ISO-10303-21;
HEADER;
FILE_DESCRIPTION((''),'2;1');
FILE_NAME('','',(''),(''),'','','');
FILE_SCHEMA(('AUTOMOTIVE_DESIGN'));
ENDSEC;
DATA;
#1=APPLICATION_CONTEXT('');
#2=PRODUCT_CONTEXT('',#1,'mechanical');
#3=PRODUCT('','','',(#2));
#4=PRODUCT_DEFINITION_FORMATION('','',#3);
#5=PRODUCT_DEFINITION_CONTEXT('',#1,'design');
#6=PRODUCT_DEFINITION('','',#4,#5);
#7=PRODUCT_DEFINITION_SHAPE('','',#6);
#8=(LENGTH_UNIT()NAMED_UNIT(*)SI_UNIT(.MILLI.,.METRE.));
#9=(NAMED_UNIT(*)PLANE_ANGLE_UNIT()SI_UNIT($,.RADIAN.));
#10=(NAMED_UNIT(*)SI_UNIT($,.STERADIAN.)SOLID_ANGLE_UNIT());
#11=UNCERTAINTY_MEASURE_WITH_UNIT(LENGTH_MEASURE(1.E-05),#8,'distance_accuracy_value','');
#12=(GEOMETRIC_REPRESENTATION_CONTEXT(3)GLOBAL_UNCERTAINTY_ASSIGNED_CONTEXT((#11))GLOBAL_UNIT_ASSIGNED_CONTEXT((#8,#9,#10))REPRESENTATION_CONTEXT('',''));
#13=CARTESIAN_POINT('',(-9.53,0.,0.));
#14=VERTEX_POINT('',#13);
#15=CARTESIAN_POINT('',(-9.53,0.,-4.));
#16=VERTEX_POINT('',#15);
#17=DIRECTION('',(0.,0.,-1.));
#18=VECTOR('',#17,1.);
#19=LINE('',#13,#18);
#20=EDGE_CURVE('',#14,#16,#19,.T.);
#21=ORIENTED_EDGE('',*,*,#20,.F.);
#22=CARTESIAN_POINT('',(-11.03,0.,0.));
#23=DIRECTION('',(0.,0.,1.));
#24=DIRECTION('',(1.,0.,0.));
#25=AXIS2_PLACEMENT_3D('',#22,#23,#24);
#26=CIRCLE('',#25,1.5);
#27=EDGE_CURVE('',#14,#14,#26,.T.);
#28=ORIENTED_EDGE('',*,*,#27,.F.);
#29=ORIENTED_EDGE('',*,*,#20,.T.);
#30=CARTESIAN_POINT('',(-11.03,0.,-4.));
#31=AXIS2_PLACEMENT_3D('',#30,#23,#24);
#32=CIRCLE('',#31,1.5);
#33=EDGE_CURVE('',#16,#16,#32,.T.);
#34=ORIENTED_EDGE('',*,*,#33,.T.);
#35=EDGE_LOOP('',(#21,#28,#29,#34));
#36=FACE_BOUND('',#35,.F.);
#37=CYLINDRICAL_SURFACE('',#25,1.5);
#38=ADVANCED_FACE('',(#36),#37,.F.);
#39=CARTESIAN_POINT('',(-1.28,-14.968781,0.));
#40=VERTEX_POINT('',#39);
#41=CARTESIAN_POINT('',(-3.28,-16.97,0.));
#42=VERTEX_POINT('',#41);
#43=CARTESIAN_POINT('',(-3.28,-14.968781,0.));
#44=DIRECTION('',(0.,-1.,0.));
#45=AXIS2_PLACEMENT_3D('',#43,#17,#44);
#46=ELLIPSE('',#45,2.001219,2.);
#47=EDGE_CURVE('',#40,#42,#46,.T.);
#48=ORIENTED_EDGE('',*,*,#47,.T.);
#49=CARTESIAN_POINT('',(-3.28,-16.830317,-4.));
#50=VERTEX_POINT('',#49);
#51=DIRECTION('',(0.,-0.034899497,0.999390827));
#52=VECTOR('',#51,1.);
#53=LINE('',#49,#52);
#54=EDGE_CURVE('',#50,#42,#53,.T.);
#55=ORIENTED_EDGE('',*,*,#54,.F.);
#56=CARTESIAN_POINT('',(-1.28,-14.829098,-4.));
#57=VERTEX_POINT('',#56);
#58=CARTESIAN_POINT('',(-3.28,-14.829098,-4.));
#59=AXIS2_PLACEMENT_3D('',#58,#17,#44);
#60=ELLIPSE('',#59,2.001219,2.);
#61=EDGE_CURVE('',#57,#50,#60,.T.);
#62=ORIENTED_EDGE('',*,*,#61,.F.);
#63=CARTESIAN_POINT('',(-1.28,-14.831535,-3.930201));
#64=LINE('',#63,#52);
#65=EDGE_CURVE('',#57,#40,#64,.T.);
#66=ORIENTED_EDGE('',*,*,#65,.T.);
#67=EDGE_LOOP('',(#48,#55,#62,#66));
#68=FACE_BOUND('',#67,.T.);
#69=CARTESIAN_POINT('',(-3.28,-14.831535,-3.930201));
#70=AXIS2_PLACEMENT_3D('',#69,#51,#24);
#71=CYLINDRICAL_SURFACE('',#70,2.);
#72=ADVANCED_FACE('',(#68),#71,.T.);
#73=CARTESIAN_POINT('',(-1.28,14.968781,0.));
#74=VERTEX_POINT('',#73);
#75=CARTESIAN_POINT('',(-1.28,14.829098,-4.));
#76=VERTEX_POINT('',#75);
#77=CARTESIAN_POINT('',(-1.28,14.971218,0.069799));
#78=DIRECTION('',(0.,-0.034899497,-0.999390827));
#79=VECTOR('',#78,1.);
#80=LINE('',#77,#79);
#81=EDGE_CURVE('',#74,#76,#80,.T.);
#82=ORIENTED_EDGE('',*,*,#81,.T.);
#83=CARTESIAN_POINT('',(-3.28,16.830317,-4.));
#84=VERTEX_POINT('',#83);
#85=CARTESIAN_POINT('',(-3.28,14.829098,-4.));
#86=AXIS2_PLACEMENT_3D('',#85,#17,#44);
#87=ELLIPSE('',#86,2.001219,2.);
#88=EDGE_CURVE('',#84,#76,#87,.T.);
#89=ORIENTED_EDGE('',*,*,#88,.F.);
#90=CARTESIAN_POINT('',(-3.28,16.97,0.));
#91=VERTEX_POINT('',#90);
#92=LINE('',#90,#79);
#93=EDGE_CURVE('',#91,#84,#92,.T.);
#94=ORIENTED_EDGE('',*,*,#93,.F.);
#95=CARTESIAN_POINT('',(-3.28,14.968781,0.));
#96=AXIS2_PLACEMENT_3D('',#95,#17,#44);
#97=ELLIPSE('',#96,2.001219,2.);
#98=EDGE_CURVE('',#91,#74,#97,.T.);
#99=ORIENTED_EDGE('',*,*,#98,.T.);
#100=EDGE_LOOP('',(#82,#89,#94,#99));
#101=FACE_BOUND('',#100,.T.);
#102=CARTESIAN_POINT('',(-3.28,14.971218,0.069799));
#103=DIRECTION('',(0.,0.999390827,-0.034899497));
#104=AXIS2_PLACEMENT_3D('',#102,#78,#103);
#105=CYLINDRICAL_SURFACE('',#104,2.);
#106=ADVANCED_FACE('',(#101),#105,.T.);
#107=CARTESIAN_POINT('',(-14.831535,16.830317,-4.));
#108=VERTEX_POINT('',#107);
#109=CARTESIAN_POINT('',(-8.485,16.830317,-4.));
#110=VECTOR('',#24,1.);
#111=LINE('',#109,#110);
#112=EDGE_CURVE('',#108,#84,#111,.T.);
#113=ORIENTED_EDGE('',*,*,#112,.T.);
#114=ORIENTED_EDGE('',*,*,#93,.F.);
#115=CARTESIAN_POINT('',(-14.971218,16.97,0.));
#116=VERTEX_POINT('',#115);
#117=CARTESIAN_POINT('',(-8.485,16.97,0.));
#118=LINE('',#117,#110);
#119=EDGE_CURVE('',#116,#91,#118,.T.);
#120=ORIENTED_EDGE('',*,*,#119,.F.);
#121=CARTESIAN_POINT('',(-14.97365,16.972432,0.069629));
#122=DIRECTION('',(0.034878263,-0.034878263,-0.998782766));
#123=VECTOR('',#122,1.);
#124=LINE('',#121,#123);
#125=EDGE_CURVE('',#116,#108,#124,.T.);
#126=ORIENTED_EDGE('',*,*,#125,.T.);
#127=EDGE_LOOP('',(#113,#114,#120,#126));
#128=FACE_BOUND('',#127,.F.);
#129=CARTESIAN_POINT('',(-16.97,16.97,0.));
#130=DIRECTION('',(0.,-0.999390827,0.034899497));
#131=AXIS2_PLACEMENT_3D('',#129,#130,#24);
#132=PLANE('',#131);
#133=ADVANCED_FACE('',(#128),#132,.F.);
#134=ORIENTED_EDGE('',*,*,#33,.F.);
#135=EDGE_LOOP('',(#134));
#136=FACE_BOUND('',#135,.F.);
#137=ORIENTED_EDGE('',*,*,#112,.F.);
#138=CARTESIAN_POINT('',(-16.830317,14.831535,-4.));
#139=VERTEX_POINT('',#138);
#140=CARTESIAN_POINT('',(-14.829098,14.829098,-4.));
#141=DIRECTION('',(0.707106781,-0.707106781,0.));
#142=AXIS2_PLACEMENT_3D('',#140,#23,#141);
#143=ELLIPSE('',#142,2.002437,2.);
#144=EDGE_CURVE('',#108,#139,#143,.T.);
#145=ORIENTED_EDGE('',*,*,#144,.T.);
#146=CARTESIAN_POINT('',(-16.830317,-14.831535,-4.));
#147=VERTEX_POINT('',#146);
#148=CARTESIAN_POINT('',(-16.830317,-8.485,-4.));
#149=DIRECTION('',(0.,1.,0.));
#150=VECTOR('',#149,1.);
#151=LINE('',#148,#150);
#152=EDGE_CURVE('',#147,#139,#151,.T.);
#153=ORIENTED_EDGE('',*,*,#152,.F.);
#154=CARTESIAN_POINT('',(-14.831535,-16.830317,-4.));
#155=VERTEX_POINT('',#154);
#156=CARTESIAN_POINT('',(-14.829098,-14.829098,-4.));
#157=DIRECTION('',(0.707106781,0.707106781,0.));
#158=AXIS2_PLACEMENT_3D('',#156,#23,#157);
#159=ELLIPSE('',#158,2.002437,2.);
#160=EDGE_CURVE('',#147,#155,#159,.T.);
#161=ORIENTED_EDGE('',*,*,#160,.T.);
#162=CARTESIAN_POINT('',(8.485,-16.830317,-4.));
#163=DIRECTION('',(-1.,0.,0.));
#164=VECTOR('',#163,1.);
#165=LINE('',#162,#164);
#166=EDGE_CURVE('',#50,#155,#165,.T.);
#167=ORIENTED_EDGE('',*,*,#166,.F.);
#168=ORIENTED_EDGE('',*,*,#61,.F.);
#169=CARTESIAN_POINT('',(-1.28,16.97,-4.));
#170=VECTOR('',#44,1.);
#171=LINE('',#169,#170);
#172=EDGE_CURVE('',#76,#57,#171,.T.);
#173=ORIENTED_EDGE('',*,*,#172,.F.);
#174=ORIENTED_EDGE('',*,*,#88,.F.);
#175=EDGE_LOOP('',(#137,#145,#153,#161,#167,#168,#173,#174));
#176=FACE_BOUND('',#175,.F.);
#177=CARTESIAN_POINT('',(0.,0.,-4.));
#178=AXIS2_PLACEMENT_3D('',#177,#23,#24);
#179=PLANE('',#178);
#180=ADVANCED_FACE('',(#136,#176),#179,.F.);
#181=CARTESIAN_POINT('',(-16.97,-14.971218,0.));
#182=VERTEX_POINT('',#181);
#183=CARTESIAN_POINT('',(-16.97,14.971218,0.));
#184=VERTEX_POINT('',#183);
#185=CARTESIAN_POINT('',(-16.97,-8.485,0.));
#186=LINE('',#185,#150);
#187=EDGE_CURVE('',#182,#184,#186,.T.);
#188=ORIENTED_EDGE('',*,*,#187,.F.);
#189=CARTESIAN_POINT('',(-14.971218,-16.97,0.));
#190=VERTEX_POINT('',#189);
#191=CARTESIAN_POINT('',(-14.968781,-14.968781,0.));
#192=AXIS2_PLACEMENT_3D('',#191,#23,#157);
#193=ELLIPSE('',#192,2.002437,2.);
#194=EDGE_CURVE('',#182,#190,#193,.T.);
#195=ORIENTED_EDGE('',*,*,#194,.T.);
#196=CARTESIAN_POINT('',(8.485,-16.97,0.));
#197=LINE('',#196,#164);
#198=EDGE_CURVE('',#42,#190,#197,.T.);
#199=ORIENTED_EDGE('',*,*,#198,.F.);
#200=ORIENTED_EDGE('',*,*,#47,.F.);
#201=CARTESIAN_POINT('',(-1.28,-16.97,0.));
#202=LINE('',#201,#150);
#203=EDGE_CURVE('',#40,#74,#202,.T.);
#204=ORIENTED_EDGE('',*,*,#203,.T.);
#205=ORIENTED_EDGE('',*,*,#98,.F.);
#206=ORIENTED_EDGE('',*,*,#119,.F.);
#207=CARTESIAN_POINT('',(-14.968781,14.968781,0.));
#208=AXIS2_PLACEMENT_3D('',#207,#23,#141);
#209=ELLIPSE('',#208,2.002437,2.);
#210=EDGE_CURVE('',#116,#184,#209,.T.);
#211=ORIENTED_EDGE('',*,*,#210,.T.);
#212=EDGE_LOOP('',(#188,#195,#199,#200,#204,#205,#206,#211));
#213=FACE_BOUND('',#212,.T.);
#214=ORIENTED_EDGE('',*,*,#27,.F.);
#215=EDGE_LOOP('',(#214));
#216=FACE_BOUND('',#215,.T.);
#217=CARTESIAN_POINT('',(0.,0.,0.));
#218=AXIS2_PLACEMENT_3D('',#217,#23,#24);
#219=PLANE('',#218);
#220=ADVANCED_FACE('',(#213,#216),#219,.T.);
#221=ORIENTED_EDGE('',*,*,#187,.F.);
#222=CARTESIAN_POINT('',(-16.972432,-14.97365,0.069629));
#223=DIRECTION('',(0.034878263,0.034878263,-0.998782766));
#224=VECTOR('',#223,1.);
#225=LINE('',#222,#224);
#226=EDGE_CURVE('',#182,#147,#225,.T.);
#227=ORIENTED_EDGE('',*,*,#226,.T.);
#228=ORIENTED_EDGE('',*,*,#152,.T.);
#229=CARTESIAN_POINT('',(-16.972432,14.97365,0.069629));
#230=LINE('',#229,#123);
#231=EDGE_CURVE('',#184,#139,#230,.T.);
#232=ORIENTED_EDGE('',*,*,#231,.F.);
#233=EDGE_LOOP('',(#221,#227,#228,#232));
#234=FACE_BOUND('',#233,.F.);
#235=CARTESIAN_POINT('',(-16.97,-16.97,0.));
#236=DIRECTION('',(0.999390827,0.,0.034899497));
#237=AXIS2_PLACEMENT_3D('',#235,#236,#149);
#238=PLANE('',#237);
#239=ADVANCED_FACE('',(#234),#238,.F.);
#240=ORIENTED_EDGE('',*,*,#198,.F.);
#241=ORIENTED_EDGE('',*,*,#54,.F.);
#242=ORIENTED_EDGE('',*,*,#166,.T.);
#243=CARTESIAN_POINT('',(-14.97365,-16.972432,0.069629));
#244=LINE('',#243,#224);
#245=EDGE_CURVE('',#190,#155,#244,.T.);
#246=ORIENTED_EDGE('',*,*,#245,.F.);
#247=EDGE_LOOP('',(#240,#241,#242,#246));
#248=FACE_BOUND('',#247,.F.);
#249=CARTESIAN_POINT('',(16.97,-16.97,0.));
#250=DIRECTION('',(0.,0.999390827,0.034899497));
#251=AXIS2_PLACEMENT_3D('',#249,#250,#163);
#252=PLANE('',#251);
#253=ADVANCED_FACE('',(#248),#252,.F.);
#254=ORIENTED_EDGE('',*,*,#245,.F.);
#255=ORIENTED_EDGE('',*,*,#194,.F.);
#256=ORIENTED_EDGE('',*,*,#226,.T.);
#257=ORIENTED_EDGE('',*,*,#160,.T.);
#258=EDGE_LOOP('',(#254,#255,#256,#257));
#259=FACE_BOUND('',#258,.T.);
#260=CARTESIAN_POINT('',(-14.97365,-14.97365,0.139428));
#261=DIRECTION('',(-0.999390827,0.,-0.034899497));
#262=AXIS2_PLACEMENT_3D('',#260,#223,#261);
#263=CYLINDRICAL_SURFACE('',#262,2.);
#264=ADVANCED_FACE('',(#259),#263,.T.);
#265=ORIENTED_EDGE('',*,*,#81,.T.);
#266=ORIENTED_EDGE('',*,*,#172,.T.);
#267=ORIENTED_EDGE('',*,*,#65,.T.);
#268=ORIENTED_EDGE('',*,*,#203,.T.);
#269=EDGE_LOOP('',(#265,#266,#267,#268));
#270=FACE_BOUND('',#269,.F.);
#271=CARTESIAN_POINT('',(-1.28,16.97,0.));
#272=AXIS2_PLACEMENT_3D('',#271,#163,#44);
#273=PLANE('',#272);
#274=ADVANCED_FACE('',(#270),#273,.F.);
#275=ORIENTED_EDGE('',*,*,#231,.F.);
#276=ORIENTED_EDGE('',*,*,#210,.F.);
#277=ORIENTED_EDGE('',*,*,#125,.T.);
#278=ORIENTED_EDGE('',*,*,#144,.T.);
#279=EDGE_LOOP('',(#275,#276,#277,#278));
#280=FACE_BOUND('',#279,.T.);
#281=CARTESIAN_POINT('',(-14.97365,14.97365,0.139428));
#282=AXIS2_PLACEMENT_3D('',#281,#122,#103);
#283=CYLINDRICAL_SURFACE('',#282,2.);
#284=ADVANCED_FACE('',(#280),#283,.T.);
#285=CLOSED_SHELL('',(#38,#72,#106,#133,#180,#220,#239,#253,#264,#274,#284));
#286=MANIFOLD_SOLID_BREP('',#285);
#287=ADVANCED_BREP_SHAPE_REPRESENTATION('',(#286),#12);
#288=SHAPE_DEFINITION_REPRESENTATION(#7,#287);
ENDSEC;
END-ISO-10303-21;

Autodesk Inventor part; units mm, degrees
ref_plane "YZ Plane" through (0, 0, 0) normal (1, 0, 0) x (0, 1, 0)
ref_plane "XZ Plane" through (0, 0, 0) normal (0, 1, 0) x (-1, 0, 0)
ref_plane "XY Plane" through (0, 0, 0) normal (0, 0, 1) x (1, 0, 0)
ref_plane "Arbeitsebene1" through (0, 0, 0) normal (0, 0, 1) x (1, 0, 0)
sketch "Skizze1" plane through (0, 0, 0) normal (0, 0, 1) x (1, 0, 0)
  line L0 (20.3781, -18.1328) -> (23.4454, -18.9546) construction
  line L1 (23.4454, -18.9546) -> (24.2672, -22.0219) construction
  line L2 (24.2672, -22.0219) -> (22.0219, -24.2672) construction
  line L3 (22.0219, -24.2672) -> (18.9546, -23.4454) construction
  line L4 (18.9546, -23.4454) -> (18.1328, -20.3781) construction
  line L5 (18.1328, -20.3781) -> (20.3781, -18.1328) construction
  line L6 (-24.2672, 22.0219) -> (-22.0219, 24.2672) construction
  line L7 (-22.0219, 24.2672) -> (-18.9546, 23.4454) construction
  line L8 (-18.9546, 23.4454) -> (-18.1328, 20.3781) construction
  line L9 (-18.1328, 20.3781) -> (-20.3781, 18.1328) construction
  line L10 (-20.3781, 18.1328) -> (-23.4454, 18.9546) construction
  line L11 (-23.4454, 18.9546) -> (-24.2672, 22.0219) construction
  circle A0 centre (20.66, 14.3) radius 2.475 construction
  circle A1 centre (14.3, -20.66) radius 2.475 construction
  circle A2 centre (-20.66, -14.3) radius 2.475 construction
  circle A3 centre (-14.3, 20.66) radius 2.475 construction
  circle A4 centre (14.3, 20.66) radius 2.475 construction
  circle A5 centre (-20.66, 14.3) radius 2.475 construction
  circle A6 centre (-14.3, -20.66) radius 2.475 construction
  circle A7 centre (20.66, -14.3) radius 2.475 construction
  arc A8 (-8.8, -18.96) -> (-8.8, -22.36) centre (-8.8, -20.66) ccw construction
  line L12 (-8.8, -18.96) -> (8.8, -18.96) construction
  arc A9 (8.8, -22.36) -> (8.8, -18.96) centre (8.8, -20.66) ccw construction
  line L13 (8.8, -22.36) -> (-8.8, -22.36) construction
  arc A10 (-8.8, 22.36) -> (-8.8, 18.96) centre (-8.8, 20.66) ccw construction
  line L14 (-8.8, 22.36) -> (8.8, 22.36) construction
  arc A11 (8.8, 18.96) -> (8.8, 22.36) centre (8.8, 20.66) ccw construction
  line L15 (8.8, 18.96) -> (-8.8, 18.96) construction
  arc A12 (-18.96, 8.8) -> (-22.36, 8.8) centre (-20.66, 8.8) ccw construction
  line L16 (-18.96, 8.8) -> (-18.96, -8.8) construction
  arc A13 (-22.36, -8.8) -> (-18.96, -8.8) centre (-20.66, -8.8) ccw construction
  line L17 (-22.36, -8.8) -> (-22.36, 8.8) construction
  arc A14 (18.96, -8.8) -> (22.36, -8.8) centre (20.66, -8.8) ccw construction
  line L18 (18.96, -8.8) -> (18.96, 8.8) construction
  arc A15 (22.36, 8.8) -> (18.96, 8.8) centre (20.66, 8.8) ccw construction
  line L19 (22.36, 8.8) -> (22.36, -8.8) construction
  line L20 (-16.97, -16.97) -> (-16.97, 16.97) construction
  line L21 (-16.97, 16.97) -> (16.97, 16.97) construction
  line L22 (16.97, 16.97) -> (16.97, -16.97) construction
  line L23 (16.97, -16.97) -> (-16.97, -16.97) construction
  circle A16 centre (-21.2, -21.2) radius 2.75 construction
  circle A17 centre (21.2, 21.2) radius 2.75 construction
  arc A18 (-24.35, -22.85) -> (-22.85, -24.35) centre (-22.85, -22.85) ccw construction
  line L24 (22.85, -24.35) -> (-22.85, -24.35) construction
  arc A19 (22.85, -24.35) -> (24.35, -22.85) centre (22.85, -22.85) ccw construction
  line L25 (24.35, 22.85) -> (24.35, -22.85) construction
  arc A20 (24.35, 22.85) -> (22.85, 24.35) centre (22.85, 22.85) ccw construction
  line L26 (-22.85, 24.35) -> (22.85, 24.35) construction
  arc A21 (-22.85, 24.35) -> (-24.35, 22.85) centre (-22.85, 22.85) ccw construction
  line L27 (-24.35, -22.85) -> (-24.35, 22.85) construction
  line L28 (-16.97, 16.97) -> (16.97, 16.97)
  line L29 (16.97, 16.97) -> (16.97, -16.97)
  line L30 (16.97, -16.97) -> (-16.97, -16.97)
  line L31 (-16.97, -16.97) -> (-16.97, 16.97)
  point P0 (0, 0)
extrude "Extrusion1" add sketch "Skizze1" against normal blind 4 draft -2
sketch "Skizze2" plane through (0, 0, 0) normal (0, 0, 1) x (1, 0, 0)
  circle A0 centre (-11.03, 0) radius 2.5 projected
  circle A1 centre (-11.03, 0) radius 1.5
  point P0 (0, 0)
  dimension "d3" = 3
extrude "Extrusion2" cut sketch "Skizze2" against normal blind 4 contours A1
fillet "Rundung1" radius 2 4 edges at (-16.9002, -16.9002, -2) (16.9002, -16.9002, -2) (16.9002, 16.9002, -2) (-16.9002, 16.9002, -2)
sketch "Skizze3" plane through (0, 0, 0) normal (0, 0, 1) x (1, 0, 0)
  circle A0 centre (28.0867, -9.6825) radius 1.4 construction
  circle A1 centre (33.0867, 9.6314) radius 1.4 construction
  circle A2 centre (33.0867, -9.6825) radius 1.4 construction
  circle A3 centre (28.0867, 9.6314) radius 1.4 construction
  circle A4 centre (-11.03, 0) radius 3 construction
  circle A5 centre (0.47, 11.5) radius 1.75 construction
  circle A6 centre (0.47, -11.5) radius 1.75 construction
  line L0 (14.4713, 6.5256) -> (36.5731, 6.5256) construction
  line L1 (36.5731, 16.4952) -> (36.5731, 6.5256) construction
  line L2 (-2.8633, 16.4952) -> (36.5731, 16.4952) construction
  line L3 (-24.53, 3.4952) -> (-2.8633, 16.4952) construction
  line L4 (-24.53, 3.4952) -> (-24.53, -3.4952) construction
  line L5 (-24.53, -3.4952) -> (-2.8633, -16.4952) construction
  line L6 (-2.8633, -16.4952) -> (36.5731, -16.4952) construction
  line L7 (36.5731, -16.4952) -> (36.5731, -6.4744) construction
  line L8 (36.5731, -6.4744) -> (14.4713, -6.4744) construction
  line L9 (14.4713, -6.4744) -> (14.4713, -13.5) construction
  line L10 (14.4713, -13.5) -> (4.1713, -13.5) construction
  line L11 (4.1713, -13.5) -> (4.1713, 13.5) construction
  line L12 (4.1713, 13.5) -> (14.4713, 13.5) construction
  line L13 (14.4713, 13.5) -> (14.4713, 6.5256) construction
  circle A7 centre (-11.03, 0) radius 1.5 construction
  ellipse E0 centre (-14.9688, 14.9688) end of major axis (-16.3847, 16.3847) minor radius 2 (-14.9712, 16.97) -> (-16.97, 14.9712) ccw construction
  line L14 (-16.97, 14.9712) -> (-16.97, -14.9712) construction
  ellipse E1 centre (-14.9688, -14.9688) end of major axis (-16.3847, -16.3847) minor radius 2 (-16.97, -14.9712) -> (-14.9712, -16.97) ccw construction
  line L15 (-14.9712, -16.97) -> (14.9712, -16.97) construction
  ellipse E2 centre (14.9688, -14.9688) end of major axis (16.3847, -16.3847) minor radius 2 (14.9712, -16.97) -> (16.97, -14.9712) ccw construction
  line L16 (16.97, -14.9712) -> (16.97, 14.9712) construction
  ellipse E3 centre (14.9688, 14.9688) end of major axis (16.3847, 16.3847) minor radius 2 (16.97, 14.9712) -> (14.9712, 16.97) ccw construction
  line L17 (14.9712, 16.97) -> (-14.9712, 16.97) construction
  line L18 (-14.8315, -16.8303) -> (14.8315, -16.8303) projected
  line L19 (16.97, 16.97) -> (-1.28, 16.97)
  line L20 (-1.28, 16.97) -> (-1.28, -16.8303)
  line L21 (-1.28, -16.8303) -> (16.97, -16.8303)
  line L22 (16.97, -16.8303) -> (16.97, 16.97)
  line L23 (-14.9712, -16.97) -> (14.9712, -16.97) projected
  line L24 (16.97, -16.8303) -> (-1.28, -16.8303)
  line L25 (-1.28, -16.8303) -> (-1.28, -16.97)
  line L26 (-1.28, -16.97) -> (16.97, -16.97)
  line L27 (16.97, -16.97) -> (16.97, -16.8303)
  point P0 (0, 0)
  point P1 (14.8315, -16.8303)
extrude "Extrusion3" cut sketch "Skizze3" against normal blind 4
fillet "Rundung2" radius 2 2 edges at (-1.28, -16.9002, -2) (-1.28, 16.9002, -2)
properties part number "30_Cube_Z_Focus_MGN_NEMA_counterplate_inner"
